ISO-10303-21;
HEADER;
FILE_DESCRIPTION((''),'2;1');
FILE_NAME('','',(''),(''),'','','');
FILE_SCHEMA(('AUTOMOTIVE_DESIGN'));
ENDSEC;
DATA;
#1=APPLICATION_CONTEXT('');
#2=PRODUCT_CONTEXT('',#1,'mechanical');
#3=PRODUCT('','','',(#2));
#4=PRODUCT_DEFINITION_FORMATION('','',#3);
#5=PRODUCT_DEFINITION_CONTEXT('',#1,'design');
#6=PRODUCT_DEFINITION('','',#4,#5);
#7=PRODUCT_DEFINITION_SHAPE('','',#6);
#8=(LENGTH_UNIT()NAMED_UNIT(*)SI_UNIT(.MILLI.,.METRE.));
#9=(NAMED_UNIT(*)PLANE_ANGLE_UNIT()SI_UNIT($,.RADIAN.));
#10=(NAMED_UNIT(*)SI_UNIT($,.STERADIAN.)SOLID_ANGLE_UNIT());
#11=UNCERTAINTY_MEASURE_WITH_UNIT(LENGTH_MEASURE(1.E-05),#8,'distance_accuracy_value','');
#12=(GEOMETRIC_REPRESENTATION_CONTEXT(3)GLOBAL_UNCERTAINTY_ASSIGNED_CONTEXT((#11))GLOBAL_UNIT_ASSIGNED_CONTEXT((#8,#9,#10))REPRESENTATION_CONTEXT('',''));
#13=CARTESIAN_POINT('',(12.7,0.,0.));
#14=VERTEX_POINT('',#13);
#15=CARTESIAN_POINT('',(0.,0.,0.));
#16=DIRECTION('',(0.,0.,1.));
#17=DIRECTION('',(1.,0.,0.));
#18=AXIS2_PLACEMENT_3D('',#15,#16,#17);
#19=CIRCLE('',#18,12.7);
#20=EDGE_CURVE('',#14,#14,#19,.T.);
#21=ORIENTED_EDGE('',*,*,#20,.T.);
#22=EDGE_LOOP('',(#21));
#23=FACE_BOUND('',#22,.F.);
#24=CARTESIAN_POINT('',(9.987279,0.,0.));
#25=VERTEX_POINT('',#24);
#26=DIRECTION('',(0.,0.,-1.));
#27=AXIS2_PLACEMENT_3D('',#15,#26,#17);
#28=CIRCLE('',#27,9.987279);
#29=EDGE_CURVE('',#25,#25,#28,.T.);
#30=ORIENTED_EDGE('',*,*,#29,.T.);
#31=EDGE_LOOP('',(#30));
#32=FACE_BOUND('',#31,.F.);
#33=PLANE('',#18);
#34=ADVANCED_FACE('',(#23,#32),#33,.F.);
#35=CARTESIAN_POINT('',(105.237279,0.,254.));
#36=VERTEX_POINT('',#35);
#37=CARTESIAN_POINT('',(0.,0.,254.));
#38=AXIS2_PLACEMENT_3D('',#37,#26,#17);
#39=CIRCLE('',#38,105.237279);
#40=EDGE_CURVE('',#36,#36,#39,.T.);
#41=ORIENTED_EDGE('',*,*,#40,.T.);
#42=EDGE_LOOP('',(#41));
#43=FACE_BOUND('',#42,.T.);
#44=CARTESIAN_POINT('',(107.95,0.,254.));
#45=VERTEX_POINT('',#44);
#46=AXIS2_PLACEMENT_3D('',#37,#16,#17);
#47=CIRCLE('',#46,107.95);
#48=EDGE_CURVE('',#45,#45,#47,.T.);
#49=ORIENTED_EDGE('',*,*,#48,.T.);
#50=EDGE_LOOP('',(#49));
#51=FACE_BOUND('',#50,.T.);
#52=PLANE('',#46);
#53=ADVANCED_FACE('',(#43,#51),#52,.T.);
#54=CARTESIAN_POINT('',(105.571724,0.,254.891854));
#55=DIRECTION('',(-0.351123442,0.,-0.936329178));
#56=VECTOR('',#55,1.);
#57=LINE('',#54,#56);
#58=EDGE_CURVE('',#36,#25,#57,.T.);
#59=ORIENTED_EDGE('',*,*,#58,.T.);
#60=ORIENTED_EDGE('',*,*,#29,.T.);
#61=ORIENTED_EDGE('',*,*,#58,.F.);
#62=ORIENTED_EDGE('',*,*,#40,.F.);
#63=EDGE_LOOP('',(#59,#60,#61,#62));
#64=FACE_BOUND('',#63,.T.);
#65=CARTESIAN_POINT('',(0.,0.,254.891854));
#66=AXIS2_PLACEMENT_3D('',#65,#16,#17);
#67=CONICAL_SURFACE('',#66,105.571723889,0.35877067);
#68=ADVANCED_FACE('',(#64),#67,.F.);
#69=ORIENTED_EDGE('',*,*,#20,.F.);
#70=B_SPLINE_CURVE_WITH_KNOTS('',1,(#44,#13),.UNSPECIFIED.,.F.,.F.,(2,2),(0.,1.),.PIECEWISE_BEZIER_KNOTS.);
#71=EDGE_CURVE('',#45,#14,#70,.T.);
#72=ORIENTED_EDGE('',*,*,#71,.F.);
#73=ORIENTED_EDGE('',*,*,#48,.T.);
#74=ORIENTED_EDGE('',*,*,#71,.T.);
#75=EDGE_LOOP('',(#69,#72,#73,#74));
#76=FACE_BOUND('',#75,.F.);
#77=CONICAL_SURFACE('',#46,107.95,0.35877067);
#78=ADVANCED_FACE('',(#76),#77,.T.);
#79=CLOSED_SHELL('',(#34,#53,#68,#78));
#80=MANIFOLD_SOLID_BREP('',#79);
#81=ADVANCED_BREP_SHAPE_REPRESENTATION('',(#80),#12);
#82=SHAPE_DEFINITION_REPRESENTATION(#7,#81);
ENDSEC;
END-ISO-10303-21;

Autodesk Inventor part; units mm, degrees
ref_plane "YZ Plane" through (0, 0, 0) normal (1, 0, 0) x (0, 1, 0)
sketch "Sketch1" plane through (0, 0, 0) normal (0, 0, 1) x (1, 0, 0)
  circle A0 centre (0, 0) radius 12.7
  dimension "d0" = 25.4
ref_plane "Work Plane1" through (0, 0, 254) normal (0, 0, 1) x (1, 0, 0)
ref_plane "Work Plane2" through (0, 0, 254) normal (0, 0, 1) x (1, 0, 0)
sketch "Sketch3" plane through (0, 0, 254) normal (0, 0, 1) x (1, 0, 0)
  circle A0 centre (0, 0) radius 107.95
  dimension "d9" = 215.9
loft "Loft2" add profiles "Sketch3", "Sketch1"
shell "Shell2" thickness 2.54 removed faces 2 at (-32.0495, 20.0441, 254) at (-3.6254, -0.9542, 0)
properties part number "Tube"
